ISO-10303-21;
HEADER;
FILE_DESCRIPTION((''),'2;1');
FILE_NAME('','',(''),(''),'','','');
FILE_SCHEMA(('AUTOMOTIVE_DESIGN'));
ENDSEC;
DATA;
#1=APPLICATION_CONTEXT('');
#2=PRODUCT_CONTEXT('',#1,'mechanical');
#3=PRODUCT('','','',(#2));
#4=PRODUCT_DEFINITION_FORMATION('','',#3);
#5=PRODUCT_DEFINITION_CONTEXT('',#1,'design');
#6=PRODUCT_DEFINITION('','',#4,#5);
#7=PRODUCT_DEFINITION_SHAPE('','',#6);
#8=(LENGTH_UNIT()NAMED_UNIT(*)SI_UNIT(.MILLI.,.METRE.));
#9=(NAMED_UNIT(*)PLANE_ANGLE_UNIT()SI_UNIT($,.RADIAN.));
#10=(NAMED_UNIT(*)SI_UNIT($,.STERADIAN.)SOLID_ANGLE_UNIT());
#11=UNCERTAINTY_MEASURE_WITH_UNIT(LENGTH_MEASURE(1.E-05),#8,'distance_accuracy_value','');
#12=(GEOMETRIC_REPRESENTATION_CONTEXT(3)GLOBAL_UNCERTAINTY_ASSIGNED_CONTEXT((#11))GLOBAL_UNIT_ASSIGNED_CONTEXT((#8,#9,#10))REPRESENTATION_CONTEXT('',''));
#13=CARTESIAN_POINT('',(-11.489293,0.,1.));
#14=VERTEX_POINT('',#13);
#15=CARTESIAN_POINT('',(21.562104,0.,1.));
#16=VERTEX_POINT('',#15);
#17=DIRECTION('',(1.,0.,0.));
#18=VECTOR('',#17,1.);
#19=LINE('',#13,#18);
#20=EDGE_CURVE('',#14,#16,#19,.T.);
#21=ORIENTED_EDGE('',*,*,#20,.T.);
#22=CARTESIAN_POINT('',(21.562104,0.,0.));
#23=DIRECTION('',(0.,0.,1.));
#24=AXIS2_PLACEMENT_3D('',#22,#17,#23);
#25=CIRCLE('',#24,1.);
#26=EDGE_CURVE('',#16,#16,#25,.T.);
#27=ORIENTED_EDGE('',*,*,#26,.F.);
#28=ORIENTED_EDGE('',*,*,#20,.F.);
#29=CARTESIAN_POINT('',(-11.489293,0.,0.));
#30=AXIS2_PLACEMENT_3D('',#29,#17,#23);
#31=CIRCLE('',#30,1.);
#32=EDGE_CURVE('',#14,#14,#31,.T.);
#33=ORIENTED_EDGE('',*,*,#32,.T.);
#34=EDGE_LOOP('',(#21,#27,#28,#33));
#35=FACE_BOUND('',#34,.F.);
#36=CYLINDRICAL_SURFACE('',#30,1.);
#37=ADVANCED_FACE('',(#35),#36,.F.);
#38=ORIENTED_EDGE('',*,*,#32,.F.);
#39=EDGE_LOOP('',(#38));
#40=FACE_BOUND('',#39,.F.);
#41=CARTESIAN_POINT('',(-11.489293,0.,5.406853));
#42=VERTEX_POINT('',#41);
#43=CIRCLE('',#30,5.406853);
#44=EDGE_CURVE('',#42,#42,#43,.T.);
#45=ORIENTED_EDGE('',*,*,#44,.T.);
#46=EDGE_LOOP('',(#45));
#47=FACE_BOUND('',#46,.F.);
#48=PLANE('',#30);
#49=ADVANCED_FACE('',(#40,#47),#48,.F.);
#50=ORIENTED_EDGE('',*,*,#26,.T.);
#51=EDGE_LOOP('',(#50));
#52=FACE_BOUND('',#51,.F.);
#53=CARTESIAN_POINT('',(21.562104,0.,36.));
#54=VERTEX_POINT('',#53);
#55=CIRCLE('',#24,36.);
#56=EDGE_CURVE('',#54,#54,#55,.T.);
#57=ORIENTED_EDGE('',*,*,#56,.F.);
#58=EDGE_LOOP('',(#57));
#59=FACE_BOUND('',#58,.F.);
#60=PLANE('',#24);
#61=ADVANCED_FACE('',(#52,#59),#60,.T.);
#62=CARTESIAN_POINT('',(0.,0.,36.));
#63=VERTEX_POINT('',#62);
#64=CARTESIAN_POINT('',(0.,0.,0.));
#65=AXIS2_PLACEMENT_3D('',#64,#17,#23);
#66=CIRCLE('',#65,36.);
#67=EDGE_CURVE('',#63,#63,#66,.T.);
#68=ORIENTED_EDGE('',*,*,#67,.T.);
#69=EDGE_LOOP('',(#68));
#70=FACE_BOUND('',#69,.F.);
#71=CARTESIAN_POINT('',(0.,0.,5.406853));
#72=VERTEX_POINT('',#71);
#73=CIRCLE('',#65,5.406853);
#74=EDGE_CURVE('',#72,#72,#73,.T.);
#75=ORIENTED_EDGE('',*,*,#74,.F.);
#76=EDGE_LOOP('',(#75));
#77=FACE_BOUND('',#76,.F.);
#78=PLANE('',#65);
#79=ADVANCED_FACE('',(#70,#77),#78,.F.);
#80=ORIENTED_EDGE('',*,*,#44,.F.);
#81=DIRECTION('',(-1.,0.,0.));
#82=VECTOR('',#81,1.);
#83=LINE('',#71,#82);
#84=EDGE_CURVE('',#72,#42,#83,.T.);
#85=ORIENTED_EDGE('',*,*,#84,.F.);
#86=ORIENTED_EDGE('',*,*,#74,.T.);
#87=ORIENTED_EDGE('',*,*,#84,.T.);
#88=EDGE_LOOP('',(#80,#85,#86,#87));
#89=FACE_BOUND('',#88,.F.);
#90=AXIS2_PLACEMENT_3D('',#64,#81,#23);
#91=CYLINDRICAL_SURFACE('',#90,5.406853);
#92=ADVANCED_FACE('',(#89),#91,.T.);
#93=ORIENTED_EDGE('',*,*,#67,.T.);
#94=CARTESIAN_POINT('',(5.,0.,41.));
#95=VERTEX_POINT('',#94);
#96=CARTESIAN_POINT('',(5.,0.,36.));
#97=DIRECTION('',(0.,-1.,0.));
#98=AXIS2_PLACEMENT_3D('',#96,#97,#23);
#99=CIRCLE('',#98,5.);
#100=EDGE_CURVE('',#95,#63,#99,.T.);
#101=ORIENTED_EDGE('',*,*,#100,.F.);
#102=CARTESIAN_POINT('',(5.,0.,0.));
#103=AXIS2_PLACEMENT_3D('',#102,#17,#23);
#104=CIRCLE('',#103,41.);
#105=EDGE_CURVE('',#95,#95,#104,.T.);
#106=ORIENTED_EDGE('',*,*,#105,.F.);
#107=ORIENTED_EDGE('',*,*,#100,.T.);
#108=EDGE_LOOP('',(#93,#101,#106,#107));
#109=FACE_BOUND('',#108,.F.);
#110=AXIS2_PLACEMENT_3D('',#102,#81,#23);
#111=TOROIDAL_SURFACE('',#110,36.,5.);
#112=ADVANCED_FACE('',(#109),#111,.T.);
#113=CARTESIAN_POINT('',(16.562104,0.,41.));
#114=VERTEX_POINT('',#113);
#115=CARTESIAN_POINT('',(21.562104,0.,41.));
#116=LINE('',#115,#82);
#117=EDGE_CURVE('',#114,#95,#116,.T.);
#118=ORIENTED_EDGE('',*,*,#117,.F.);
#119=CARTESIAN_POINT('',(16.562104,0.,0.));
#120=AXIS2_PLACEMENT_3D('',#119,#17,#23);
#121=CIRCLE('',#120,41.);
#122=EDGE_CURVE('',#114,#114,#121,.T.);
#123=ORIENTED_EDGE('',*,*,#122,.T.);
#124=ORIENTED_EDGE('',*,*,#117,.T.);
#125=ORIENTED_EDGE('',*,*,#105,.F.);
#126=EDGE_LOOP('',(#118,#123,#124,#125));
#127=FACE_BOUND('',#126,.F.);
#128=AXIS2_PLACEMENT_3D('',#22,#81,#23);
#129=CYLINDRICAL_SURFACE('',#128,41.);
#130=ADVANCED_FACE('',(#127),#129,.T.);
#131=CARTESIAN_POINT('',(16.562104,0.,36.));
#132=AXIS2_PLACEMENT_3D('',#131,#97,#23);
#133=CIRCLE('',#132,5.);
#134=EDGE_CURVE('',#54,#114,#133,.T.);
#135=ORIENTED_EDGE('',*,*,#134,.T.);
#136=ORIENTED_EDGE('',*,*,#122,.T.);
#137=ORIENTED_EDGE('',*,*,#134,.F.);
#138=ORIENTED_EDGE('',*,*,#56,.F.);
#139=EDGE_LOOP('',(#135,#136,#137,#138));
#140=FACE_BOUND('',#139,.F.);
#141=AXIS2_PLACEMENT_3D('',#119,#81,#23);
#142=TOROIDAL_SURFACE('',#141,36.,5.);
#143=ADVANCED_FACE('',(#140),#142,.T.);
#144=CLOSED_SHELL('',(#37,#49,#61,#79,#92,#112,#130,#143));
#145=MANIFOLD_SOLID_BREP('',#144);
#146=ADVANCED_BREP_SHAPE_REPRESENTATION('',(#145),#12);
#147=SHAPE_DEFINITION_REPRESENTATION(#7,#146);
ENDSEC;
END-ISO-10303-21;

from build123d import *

# Parameters (mm, degrees)
F2_R = 5


# Not quite as in the source:
# - a feature names something its author has since deleted; it is built from what else it names


with BuildPart() as f1:
    # F0 (on Front) → F1 (revolve)
    with BuildSketch(Plane.XZ):
        Polygon((0, 5.4068532586), (-11.4892933807, 5.4068532586), (-11.4892933807, 1), (21.5621040944, 1), (21.5621040944, 41), (0, 41), align=None)
    revolve(axis=Axis((1.7312624663, 0, 0), (1, 0, 0)))

    # F2
    f2_edges = [f1.edges().sort_by_distance(p)[0] for p in [
        (21.562104, 0, -41),
        (0, 0, -41),
    ]]
    fillet(f2_edges, radius=F2_R)


solid = f1.part
